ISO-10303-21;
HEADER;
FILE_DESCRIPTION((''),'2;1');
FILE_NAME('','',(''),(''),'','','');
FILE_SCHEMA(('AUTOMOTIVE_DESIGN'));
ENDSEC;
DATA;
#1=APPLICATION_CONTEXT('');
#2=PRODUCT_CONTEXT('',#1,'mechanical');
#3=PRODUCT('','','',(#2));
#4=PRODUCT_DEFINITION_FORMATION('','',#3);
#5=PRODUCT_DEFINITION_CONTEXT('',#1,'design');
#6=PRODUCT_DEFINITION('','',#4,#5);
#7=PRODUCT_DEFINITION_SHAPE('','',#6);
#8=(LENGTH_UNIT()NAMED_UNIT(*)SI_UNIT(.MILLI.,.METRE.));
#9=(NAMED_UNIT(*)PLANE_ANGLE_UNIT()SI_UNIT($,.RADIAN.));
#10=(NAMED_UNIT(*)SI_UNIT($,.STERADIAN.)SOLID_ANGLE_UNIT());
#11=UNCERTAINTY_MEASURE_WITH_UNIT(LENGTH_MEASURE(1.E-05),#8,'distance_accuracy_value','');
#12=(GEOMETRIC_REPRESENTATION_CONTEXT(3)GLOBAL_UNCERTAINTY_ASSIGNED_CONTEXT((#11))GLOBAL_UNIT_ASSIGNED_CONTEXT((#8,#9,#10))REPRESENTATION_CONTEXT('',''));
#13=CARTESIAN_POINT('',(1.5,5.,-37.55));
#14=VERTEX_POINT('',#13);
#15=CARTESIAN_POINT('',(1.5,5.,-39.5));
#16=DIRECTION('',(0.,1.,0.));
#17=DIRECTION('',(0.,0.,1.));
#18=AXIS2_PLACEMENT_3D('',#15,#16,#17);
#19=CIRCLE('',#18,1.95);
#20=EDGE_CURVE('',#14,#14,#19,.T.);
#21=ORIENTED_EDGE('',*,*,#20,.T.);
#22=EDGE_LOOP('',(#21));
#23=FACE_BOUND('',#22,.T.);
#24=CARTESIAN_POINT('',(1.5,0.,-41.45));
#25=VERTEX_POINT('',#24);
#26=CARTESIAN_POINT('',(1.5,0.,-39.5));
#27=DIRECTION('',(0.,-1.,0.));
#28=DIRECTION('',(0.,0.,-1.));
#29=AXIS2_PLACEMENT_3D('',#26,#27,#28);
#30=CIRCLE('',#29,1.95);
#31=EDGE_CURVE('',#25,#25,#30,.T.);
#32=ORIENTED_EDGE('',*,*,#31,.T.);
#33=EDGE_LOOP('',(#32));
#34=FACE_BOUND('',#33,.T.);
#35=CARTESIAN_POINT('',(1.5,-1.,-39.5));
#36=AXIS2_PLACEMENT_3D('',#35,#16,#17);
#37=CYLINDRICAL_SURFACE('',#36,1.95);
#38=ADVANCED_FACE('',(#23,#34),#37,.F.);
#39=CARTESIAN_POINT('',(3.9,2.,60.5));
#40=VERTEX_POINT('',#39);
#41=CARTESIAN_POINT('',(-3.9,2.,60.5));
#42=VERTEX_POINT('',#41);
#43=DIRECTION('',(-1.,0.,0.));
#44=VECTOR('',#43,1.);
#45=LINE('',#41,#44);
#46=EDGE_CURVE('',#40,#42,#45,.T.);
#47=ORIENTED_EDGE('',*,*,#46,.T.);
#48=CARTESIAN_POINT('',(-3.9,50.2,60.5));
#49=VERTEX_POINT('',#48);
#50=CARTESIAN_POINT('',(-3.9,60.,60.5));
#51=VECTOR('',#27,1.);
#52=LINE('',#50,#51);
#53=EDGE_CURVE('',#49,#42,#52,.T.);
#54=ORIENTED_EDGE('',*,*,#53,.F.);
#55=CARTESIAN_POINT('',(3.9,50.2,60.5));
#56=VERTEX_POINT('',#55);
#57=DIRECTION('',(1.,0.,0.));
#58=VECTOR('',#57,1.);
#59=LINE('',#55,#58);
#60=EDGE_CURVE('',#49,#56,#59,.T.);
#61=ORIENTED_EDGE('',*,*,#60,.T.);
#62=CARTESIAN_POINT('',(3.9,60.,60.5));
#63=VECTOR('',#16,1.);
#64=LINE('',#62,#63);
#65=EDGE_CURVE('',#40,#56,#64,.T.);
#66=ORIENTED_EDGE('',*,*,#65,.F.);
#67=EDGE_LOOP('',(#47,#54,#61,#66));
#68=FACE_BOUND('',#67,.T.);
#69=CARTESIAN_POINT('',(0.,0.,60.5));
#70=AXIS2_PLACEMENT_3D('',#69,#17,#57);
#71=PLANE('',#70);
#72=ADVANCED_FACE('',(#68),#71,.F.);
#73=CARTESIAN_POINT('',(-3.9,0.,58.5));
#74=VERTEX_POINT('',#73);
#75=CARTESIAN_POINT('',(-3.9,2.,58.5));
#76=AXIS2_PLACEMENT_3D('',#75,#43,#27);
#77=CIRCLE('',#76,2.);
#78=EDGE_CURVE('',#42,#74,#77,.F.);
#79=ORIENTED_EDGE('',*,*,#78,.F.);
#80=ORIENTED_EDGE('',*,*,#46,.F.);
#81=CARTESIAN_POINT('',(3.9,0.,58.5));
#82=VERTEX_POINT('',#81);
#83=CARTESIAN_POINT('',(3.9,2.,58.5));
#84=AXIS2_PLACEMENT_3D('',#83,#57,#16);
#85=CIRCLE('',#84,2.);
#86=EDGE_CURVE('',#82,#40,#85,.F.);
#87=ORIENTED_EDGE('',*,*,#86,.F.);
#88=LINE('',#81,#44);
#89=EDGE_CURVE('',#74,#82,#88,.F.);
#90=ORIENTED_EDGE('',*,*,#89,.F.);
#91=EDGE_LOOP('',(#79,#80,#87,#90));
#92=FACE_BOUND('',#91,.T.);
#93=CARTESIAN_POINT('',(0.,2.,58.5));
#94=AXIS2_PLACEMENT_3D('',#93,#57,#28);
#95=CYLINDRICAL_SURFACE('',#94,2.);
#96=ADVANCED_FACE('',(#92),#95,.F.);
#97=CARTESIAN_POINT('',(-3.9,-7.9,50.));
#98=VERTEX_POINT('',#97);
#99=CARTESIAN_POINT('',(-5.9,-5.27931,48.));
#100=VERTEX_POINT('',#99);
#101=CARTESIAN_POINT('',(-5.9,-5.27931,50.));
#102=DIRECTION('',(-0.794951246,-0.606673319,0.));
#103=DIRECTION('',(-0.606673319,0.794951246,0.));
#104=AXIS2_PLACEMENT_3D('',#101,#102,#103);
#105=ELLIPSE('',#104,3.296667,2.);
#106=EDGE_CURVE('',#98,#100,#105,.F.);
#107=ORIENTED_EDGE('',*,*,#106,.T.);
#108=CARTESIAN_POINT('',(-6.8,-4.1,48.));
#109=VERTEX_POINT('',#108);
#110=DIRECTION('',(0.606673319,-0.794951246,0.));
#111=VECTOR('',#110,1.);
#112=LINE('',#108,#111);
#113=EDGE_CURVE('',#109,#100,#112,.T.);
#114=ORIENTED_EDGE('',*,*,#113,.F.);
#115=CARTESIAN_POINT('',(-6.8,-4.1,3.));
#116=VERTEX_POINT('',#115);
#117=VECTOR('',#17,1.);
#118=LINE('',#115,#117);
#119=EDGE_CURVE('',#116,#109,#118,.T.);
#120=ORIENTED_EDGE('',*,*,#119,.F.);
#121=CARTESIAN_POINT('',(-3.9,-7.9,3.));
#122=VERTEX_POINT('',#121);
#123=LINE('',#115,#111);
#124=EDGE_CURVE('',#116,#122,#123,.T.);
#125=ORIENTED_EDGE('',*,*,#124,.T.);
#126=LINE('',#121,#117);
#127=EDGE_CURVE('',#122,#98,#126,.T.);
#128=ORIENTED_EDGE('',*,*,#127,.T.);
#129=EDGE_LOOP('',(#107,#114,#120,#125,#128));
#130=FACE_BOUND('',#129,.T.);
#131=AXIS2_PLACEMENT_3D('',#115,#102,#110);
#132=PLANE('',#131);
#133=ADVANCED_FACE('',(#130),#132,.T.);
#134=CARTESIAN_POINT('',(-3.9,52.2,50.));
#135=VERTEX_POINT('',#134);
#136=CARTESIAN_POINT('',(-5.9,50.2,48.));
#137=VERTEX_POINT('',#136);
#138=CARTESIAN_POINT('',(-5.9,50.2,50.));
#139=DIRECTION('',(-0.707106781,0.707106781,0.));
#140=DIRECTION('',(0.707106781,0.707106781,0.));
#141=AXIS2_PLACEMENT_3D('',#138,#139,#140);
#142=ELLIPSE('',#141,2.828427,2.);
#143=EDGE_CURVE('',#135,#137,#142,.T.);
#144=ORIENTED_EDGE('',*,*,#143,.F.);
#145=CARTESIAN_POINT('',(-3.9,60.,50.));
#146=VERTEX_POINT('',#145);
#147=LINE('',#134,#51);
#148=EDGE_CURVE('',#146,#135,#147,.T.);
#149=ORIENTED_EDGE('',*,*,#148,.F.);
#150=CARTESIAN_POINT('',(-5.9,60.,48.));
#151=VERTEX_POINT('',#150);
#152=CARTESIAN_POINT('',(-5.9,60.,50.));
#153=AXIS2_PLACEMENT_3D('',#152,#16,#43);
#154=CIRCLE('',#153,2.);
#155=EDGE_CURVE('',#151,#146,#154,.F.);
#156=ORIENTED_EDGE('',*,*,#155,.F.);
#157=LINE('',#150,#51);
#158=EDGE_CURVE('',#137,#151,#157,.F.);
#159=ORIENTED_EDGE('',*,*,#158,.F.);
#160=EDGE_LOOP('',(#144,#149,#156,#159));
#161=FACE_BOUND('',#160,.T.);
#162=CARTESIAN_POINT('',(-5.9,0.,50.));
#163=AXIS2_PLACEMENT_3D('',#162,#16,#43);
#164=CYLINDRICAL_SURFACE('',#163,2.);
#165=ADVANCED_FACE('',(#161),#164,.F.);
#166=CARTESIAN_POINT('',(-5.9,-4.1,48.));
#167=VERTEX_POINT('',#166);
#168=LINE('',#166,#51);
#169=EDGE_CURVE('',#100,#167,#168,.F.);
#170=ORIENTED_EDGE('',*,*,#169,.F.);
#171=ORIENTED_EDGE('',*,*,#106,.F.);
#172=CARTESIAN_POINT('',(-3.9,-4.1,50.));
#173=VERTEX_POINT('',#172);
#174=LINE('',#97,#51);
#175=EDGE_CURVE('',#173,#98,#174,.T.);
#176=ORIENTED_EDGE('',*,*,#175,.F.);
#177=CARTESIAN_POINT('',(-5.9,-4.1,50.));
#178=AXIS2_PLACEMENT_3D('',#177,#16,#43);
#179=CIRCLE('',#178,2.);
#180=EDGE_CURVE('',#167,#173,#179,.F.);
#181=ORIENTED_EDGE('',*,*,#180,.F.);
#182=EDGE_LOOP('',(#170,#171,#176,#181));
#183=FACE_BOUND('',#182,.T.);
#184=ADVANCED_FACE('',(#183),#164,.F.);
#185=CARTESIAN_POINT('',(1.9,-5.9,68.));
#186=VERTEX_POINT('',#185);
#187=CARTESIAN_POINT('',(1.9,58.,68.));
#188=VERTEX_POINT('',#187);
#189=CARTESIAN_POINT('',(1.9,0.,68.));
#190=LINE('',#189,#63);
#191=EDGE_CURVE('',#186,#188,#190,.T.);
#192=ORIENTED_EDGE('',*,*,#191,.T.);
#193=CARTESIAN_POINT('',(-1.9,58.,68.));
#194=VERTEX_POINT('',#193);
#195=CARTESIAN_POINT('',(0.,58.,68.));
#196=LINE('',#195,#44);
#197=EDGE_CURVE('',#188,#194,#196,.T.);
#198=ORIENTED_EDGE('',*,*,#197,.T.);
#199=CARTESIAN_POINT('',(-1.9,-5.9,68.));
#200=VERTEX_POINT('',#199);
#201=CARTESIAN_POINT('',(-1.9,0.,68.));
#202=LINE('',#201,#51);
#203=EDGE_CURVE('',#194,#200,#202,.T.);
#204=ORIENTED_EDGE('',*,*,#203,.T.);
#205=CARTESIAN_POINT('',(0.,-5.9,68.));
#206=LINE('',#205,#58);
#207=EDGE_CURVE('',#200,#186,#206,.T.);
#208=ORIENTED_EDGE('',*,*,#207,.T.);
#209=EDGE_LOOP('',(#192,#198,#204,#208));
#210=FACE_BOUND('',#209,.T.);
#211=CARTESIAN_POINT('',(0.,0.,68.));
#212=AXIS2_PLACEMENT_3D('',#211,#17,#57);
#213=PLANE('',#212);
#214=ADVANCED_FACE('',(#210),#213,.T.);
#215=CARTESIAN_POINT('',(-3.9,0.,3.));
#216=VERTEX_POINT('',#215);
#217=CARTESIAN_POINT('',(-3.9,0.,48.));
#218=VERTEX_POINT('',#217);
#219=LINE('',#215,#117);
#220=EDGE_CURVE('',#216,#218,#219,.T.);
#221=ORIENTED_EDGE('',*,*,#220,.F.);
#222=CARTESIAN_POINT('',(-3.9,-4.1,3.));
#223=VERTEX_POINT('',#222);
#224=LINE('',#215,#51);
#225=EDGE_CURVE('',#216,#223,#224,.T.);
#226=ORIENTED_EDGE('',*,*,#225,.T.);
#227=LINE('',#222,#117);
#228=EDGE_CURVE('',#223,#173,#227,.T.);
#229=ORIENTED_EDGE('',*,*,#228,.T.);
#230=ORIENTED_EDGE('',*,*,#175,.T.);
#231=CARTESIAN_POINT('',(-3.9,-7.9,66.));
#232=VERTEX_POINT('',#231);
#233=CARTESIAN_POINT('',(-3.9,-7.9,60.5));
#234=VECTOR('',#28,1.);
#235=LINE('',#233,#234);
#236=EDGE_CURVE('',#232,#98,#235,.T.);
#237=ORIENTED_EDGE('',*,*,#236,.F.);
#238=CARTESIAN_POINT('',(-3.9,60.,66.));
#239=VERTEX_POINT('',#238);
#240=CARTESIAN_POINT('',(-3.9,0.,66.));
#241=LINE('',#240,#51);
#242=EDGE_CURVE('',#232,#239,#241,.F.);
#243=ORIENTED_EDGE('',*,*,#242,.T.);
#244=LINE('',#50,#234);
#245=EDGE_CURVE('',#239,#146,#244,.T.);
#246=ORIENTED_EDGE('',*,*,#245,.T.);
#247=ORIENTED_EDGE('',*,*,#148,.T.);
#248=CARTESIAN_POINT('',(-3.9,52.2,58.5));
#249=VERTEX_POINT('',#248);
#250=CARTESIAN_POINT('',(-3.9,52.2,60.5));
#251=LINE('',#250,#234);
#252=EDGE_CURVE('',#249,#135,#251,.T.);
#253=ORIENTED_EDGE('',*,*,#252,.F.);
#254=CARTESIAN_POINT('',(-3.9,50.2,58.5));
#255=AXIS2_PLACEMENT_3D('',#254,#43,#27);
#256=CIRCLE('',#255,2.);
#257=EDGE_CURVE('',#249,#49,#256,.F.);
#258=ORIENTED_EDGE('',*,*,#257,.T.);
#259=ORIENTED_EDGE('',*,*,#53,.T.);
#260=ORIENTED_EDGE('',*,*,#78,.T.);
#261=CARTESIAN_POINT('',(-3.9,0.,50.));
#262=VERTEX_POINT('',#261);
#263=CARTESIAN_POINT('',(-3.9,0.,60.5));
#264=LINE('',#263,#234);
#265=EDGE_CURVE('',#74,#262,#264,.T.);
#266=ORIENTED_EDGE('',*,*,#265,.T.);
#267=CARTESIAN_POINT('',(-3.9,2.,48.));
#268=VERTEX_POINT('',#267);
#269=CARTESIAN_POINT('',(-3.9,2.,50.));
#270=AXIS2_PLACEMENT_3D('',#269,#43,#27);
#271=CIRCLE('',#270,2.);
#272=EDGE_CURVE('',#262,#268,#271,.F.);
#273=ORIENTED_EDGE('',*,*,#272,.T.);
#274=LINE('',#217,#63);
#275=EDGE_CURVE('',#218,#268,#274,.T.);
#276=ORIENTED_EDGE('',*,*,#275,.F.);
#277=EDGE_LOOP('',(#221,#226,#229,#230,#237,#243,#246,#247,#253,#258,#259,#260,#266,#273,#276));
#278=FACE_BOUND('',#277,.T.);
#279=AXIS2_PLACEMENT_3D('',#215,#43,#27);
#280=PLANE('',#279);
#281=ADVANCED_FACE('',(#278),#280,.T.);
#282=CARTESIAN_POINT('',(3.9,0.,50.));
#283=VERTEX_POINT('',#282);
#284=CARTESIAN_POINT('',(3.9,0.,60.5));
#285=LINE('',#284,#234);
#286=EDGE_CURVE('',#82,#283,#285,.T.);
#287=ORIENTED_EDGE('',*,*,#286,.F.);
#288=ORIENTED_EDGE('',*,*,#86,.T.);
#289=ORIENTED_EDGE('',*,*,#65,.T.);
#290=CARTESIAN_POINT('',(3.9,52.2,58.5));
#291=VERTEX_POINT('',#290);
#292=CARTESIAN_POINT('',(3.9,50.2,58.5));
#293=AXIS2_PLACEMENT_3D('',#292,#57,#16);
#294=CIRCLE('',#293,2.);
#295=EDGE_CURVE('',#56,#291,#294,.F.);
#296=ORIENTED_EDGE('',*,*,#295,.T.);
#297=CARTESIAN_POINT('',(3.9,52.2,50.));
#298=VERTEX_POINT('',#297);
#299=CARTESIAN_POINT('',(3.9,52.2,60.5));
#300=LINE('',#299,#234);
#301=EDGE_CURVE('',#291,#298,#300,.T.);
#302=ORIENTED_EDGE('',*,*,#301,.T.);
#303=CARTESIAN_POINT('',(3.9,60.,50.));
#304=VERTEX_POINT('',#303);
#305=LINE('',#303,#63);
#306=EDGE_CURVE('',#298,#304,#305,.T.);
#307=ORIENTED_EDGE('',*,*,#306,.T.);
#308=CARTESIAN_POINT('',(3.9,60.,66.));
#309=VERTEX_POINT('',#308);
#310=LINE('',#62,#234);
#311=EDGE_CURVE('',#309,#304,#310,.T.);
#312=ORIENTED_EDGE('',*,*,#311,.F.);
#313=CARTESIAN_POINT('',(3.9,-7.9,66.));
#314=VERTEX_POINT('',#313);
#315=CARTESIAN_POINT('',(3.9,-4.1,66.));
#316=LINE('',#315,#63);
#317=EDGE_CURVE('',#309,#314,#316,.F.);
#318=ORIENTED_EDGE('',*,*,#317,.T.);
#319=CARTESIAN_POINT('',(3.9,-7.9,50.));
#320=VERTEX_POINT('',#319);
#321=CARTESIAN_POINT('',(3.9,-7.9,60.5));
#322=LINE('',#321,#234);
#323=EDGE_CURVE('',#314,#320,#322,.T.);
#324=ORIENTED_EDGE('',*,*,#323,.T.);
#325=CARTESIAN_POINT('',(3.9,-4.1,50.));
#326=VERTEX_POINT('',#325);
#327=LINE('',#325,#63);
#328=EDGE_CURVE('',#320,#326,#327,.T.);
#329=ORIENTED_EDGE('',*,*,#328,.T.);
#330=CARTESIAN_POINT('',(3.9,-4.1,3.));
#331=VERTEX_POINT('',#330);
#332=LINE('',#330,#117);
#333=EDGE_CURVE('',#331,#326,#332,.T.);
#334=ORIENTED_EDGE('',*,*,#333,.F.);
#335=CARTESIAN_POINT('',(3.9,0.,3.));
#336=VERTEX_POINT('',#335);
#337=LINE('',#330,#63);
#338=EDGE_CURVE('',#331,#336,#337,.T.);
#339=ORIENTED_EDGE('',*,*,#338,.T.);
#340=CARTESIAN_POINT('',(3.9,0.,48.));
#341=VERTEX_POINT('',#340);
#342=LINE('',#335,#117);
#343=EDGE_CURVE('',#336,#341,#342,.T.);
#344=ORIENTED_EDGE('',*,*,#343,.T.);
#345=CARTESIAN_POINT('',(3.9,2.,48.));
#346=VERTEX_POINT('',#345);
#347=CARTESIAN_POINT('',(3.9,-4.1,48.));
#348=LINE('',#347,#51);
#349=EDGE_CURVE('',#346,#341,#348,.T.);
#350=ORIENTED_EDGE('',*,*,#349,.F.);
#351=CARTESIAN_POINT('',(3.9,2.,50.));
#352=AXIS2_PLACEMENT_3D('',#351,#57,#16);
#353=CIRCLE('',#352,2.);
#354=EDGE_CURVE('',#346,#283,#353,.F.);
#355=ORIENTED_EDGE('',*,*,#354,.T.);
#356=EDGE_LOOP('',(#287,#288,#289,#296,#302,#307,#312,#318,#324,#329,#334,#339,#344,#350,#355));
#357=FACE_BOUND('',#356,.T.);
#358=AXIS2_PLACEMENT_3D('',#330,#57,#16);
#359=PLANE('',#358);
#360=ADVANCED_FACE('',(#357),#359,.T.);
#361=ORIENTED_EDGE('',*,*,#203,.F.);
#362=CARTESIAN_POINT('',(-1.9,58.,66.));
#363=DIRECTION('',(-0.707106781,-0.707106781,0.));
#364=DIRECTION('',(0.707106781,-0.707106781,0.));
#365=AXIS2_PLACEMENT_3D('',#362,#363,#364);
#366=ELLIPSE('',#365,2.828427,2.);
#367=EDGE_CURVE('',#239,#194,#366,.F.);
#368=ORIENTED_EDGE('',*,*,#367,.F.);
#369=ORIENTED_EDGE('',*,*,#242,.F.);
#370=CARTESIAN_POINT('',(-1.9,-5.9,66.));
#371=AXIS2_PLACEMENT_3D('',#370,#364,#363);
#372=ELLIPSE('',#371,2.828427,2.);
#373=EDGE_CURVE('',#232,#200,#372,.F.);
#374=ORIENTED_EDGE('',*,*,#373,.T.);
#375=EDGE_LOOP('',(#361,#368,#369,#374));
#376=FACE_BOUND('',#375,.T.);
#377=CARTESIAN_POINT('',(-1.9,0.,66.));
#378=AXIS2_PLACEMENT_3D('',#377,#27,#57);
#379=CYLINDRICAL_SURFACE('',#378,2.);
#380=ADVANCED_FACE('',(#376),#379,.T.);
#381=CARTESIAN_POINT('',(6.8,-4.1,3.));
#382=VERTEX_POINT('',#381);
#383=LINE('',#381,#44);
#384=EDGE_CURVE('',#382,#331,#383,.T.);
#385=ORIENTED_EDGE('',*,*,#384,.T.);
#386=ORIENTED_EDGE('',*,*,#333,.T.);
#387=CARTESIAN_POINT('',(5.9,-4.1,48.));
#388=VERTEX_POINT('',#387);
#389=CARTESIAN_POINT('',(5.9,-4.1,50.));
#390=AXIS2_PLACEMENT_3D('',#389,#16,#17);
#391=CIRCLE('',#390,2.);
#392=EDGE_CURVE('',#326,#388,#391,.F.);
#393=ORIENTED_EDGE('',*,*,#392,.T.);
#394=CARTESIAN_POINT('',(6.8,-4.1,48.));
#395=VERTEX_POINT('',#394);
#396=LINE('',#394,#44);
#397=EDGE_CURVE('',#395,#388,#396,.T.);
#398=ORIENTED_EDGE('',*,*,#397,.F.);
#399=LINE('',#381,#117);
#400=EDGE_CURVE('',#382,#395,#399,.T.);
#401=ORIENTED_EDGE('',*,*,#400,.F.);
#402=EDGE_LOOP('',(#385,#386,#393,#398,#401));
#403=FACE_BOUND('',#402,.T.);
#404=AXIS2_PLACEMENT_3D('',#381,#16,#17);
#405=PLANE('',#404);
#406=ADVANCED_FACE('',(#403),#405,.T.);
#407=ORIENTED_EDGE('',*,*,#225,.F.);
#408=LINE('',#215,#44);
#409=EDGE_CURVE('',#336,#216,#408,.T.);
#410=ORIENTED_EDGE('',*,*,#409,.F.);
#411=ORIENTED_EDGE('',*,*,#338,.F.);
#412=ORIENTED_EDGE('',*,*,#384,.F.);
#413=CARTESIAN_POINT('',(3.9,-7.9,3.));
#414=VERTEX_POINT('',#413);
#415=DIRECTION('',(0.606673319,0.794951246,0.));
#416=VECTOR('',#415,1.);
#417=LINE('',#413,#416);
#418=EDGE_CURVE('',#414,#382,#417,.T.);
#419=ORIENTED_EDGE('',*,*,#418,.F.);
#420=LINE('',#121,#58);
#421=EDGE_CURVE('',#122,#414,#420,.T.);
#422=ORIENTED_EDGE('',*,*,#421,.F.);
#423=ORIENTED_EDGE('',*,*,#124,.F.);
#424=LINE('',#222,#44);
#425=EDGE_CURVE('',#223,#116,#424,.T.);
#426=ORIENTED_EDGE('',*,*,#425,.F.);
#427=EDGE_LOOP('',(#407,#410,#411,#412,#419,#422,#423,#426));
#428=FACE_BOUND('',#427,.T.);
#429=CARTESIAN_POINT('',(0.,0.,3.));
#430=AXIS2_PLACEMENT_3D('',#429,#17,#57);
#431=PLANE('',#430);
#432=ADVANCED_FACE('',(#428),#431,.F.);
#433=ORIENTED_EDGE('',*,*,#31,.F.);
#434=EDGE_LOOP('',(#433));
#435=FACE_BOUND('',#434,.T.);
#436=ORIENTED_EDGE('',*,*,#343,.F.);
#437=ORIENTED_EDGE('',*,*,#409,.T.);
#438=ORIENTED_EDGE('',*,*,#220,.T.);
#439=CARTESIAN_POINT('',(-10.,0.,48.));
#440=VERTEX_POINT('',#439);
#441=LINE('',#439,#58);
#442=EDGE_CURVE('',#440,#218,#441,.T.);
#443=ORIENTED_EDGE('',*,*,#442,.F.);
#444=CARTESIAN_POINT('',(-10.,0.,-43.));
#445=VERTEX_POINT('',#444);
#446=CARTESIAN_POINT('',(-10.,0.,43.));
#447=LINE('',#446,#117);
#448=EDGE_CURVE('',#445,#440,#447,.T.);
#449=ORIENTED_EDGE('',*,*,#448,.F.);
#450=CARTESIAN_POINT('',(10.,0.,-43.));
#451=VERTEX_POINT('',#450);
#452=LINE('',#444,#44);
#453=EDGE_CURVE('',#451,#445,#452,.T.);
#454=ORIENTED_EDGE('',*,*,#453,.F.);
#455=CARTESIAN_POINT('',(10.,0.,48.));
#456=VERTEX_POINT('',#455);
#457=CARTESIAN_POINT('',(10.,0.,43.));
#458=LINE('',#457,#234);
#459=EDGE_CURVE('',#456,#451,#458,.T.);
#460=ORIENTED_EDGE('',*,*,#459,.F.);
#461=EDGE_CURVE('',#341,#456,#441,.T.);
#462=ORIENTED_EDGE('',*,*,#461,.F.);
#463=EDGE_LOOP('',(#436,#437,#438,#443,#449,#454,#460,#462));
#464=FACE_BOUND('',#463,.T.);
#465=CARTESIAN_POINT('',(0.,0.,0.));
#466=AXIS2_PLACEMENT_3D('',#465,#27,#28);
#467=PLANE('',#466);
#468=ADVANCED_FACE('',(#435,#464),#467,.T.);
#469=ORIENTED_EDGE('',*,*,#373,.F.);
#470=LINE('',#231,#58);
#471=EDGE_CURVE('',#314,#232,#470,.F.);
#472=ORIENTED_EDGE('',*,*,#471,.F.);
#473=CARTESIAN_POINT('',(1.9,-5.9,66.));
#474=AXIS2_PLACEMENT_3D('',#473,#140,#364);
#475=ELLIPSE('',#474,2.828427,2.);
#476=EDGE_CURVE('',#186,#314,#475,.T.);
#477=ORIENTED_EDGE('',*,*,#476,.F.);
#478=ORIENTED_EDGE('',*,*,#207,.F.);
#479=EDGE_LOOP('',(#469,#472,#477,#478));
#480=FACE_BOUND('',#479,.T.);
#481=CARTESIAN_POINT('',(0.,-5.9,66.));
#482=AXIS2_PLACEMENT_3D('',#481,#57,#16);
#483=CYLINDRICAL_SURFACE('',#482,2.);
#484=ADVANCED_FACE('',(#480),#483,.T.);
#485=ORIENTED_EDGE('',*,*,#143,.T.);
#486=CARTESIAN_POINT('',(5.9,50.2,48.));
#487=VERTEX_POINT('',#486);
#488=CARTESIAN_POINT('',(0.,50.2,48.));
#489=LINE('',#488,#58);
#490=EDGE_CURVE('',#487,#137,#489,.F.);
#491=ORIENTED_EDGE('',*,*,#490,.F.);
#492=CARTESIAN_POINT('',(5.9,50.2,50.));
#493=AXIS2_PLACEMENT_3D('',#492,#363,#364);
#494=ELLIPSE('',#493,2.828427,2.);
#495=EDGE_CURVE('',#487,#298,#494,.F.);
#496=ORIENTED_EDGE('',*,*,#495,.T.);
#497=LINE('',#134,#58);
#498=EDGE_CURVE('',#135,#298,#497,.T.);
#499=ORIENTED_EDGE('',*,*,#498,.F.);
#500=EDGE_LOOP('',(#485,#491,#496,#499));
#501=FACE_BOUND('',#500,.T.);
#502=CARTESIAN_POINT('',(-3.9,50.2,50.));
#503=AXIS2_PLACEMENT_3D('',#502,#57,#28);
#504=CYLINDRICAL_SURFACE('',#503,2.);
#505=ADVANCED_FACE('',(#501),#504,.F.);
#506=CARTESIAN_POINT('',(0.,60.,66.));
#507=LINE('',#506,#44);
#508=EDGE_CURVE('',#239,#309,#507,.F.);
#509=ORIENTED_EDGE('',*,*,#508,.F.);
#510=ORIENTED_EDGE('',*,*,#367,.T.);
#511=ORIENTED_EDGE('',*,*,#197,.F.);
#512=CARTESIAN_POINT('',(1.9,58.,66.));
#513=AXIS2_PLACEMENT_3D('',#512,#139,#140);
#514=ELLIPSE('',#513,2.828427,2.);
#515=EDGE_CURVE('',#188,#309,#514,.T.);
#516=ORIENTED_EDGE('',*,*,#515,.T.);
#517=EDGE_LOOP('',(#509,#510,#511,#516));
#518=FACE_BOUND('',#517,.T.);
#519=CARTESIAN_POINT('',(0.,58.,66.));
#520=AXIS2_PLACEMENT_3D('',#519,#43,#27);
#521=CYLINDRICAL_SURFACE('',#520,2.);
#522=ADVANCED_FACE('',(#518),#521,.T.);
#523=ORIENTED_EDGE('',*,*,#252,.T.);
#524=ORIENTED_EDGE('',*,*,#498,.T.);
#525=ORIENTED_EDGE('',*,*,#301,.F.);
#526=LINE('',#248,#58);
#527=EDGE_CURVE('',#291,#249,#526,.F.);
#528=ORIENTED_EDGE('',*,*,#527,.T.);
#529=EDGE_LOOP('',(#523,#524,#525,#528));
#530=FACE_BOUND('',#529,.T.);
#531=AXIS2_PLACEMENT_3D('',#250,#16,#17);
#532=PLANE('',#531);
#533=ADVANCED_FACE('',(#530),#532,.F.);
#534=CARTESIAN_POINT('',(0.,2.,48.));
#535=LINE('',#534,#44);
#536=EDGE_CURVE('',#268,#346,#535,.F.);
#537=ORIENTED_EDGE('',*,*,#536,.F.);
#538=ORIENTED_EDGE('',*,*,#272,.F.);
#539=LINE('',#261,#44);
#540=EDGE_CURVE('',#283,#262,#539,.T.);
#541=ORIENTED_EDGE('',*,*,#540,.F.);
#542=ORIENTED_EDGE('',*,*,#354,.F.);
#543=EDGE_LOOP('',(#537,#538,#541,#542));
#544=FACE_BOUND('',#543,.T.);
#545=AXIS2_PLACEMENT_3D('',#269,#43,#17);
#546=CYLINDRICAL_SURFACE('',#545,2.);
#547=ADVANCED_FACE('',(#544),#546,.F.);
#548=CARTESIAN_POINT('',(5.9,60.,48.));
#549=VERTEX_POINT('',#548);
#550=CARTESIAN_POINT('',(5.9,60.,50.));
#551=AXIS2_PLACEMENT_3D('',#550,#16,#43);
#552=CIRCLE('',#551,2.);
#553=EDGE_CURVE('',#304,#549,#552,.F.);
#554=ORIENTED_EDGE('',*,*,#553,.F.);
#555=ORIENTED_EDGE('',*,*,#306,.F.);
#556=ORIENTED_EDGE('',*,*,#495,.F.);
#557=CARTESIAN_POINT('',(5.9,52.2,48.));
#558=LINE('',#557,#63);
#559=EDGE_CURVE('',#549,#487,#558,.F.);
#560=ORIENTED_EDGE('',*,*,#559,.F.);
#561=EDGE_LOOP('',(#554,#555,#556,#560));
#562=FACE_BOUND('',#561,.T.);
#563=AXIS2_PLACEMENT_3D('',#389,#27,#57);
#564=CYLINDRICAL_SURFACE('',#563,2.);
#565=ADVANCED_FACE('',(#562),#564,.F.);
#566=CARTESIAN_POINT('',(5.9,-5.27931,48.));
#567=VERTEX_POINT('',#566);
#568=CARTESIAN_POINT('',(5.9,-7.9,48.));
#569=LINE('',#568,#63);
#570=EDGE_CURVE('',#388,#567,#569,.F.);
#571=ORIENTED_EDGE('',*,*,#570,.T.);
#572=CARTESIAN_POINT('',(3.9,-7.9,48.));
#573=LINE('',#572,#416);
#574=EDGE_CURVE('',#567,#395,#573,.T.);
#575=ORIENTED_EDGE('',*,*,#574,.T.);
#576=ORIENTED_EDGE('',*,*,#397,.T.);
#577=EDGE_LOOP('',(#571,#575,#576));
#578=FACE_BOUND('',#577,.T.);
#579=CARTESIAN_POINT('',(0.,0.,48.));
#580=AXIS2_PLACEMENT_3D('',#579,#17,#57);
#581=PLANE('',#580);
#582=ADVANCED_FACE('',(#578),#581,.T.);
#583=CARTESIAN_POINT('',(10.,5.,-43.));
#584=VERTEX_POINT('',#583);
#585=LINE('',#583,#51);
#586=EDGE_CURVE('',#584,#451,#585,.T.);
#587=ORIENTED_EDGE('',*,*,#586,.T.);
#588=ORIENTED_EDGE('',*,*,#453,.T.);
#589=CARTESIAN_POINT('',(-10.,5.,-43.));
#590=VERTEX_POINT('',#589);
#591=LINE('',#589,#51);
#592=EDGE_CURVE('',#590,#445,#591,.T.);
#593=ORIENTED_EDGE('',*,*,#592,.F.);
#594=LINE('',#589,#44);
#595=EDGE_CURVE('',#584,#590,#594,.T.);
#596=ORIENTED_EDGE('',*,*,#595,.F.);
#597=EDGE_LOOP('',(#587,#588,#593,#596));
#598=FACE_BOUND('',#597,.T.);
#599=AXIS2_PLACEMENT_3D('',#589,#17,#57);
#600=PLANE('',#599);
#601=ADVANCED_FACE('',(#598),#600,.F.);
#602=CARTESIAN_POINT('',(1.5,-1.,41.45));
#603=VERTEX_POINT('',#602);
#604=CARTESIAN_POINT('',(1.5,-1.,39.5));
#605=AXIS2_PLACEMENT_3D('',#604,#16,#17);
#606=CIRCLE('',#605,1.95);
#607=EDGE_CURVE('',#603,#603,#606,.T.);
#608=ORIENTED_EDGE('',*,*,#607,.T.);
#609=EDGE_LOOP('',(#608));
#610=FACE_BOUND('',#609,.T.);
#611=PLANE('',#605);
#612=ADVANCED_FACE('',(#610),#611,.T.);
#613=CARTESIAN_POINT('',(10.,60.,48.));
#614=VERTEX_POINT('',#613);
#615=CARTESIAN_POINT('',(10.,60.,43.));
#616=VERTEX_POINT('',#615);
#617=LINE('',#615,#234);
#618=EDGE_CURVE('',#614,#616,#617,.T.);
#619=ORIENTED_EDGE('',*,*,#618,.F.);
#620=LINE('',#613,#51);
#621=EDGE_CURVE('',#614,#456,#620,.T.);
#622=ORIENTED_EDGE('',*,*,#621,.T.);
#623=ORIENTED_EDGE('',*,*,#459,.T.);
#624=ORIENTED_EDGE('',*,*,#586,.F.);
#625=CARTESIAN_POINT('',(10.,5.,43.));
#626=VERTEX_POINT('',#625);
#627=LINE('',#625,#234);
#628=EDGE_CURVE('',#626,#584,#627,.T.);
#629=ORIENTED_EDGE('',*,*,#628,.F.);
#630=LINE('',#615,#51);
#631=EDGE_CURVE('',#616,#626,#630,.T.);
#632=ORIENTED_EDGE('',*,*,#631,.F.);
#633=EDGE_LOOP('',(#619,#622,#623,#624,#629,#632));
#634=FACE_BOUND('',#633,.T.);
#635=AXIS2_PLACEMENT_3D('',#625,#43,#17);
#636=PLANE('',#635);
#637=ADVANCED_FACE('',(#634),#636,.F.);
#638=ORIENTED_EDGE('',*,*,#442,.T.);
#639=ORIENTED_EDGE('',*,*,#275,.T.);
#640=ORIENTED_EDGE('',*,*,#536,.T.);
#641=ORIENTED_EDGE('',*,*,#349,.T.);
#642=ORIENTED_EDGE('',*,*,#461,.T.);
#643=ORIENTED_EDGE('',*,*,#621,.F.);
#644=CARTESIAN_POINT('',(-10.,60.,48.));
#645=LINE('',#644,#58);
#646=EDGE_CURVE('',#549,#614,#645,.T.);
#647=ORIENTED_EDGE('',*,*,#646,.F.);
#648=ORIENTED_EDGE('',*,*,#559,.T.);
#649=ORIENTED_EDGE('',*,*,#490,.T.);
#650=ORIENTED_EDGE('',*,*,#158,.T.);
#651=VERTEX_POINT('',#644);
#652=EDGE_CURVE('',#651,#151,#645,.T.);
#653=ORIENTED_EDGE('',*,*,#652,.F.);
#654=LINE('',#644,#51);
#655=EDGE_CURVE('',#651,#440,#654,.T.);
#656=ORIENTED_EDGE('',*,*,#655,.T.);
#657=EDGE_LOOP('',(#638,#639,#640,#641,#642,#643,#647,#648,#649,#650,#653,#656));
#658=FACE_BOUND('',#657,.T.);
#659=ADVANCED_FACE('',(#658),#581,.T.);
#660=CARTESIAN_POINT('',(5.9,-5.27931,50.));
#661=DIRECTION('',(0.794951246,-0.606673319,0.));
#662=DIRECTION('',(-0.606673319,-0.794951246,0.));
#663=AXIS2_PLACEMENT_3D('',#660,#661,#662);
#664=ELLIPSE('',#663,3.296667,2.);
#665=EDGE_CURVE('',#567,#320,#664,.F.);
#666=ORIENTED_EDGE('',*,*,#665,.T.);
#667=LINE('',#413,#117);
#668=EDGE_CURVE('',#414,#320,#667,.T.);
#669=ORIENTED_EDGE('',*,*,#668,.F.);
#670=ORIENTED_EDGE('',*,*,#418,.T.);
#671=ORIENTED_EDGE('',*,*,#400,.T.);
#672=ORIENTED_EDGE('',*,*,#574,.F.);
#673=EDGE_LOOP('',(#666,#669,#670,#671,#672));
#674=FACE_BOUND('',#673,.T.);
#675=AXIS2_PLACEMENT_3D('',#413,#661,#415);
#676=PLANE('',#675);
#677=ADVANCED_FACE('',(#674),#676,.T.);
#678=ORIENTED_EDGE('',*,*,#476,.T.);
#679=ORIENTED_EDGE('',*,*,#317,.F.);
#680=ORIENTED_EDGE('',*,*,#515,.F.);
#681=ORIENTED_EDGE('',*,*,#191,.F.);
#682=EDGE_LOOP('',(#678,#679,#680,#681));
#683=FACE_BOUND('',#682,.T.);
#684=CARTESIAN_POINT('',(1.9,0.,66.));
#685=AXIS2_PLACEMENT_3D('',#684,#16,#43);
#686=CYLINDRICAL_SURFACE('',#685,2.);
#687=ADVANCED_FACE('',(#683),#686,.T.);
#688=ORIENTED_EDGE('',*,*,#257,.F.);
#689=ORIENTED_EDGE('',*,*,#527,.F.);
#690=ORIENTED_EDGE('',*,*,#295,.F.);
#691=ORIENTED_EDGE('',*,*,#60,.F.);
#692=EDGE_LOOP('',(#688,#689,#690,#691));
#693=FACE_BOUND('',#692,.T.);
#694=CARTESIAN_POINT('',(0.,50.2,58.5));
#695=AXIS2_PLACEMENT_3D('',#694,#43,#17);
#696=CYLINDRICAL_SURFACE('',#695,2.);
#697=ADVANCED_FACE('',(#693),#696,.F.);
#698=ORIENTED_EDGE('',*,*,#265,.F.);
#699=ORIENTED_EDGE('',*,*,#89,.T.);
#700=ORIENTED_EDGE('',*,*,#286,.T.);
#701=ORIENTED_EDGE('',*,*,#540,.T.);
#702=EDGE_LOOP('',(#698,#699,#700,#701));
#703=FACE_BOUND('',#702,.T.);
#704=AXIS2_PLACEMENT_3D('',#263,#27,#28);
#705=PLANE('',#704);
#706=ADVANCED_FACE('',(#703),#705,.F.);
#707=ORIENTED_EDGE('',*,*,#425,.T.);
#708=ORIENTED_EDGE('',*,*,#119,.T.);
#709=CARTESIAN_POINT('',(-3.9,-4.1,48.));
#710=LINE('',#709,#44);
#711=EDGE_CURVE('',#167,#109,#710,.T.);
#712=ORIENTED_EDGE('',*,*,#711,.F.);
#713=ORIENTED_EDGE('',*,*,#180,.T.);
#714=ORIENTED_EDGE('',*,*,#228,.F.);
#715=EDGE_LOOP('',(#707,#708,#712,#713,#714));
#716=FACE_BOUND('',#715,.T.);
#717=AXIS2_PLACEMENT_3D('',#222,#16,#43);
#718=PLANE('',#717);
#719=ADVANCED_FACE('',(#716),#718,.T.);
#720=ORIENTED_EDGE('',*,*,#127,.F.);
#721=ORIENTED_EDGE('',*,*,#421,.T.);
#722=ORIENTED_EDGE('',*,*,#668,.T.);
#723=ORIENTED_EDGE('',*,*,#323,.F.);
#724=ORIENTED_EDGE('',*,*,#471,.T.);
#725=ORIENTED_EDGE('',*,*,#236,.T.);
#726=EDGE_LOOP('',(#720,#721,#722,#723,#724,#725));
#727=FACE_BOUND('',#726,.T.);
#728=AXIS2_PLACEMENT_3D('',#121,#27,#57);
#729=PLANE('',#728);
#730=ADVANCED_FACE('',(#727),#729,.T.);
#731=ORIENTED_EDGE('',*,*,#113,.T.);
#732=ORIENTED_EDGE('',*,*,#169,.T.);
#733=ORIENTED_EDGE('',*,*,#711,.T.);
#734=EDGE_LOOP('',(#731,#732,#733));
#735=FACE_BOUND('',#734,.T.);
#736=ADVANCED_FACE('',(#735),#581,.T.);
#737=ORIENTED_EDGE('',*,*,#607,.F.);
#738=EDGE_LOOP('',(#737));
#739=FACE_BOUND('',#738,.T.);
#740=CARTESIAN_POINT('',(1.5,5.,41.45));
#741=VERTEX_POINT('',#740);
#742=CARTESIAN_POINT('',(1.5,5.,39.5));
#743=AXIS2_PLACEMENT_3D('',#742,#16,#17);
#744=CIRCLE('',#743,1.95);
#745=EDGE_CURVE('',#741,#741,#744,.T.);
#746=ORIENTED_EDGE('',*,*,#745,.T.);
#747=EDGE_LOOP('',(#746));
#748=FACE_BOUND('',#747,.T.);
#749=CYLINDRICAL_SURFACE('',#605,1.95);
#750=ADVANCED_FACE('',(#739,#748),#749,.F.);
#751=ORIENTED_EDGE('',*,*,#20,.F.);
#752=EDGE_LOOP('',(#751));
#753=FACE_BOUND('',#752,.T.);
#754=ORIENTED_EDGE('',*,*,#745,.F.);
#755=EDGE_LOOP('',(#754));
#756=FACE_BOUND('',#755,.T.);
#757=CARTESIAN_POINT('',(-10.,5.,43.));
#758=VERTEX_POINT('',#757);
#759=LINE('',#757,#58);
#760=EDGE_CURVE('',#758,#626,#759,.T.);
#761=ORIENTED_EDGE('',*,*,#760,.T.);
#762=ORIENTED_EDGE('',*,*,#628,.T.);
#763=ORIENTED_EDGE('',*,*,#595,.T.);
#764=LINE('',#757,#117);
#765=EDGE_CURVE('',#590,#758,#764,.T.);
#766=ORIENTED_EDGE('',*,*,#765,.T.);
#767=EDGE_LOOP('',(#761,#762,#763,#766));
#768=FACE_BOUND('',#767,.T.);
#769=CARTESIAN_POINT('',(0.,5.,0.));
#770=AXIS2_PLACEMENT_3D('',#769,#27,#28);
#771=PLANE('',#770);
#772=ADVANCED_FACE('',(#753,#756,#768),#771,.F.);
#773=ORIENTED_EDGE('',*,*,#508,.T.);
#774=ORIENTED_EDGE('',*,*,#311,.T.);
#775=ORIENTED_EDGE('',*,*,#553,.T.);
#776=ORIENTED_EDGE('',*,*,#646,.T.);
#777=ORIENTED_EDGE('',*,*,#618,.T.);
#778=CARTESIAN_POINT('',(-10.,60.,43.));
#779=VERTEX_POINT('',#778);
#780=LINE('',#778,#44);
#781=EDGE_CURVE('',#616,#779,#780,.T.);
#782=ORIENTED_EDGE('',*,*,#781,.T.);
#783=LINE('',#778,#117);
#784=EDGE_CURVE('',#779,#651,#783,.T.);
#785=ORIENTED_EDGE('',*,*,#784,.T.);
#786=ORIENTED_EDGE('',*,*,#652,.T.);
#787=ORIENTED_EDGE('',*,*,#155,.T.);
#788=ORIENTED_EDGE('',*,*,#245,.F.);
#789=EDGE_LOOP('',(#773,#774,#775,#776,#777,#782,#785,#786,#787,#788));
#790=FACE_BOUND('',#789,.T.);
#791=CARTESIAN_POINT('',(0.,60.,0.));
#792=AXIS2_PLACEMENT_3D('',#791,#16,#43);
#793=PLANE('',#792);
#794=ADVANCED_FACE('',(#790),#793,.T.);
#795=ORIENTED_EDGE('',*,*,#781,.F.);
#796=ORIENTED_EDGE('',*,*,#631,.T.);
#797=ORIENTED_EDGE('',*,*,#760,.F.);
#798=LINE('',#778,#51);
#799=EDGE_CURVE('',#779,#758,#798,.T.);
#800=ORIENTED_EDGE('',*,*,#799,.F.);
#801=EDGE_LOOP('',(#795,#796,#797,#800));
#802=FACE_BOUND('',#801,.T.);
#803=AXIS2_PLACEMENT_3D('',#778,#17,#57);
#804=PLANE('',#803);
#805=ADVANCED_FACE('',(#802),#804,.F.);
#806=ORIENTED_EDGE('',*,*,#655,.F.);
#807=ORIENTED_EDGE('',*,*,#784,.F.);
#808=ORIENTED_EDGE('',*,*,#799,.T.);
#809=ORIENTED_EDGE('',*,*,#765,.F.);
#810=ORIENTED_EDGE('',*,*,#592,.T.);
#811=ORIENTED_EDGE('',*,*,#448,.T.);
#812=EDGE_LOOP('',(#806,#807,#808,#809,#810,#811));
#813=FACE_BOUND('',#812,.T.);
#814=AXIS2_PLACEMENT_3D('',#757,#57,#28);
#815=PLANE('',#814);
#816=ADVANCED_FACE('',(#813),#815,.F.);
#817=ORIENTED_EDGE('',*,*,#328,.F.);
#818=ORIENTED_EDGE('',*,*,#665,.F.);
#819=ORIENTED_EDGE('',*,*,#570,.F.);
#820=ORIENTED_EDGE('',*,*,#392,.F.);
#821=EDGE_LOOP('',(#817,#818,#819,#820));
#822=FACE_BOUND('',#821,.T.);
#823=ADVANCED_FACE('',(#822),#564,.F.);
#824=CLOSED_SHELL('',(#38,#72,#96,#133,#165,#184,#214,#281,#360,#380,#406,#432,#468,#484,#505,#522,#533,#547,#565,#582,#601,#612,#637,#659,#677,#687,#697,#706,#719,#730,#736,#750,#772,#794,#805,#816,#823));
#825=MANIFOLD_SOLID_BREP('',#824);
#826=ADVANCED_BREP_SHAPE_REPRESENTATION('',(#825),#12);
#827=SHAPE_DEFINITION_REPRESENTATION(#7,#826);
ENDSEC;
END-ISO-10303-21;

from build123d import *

# Parameters (mm, degrees)
SKETCH1_W           = 20
SKETCH1_H           = 86
BOSS_EXTRUDE1_DEPTH = 5
BOSS_EXTRUDE4_DEPTH = 40
SKETCH2_R           = 1.95
CUT_EXTRUDE1_DEPTH  = 6
BOSS_EXTRUDE5_DEPTH = 5
SKETCH5_W           = 20
SKETCH5_H           = 5
BOSS_EXTRUDE7_DEPTH = 60
SKETCH6_W           = 7.8
SKETCH6_H           = 7.9
SKETCH6_H_2         = 7.8
BOSS_EXTRUDE8_DEPTH = 12.5
SKETCH7_W           = 7.8
SKETCH7_H           = 67.9
BOSS_EXTRUDE9_DEPTH = 7.5
FILLET2_R           = 2


with BuildPart() as part:
    # Sketch1 → Boss-Extrude1 (new body)
    with BuildSketch(Plane(origin=(0, 0, 0), x_dir=(1, 0, 0), z_dir=(0, 1, 0))):
        Rectangle(SKETCH1_W, SKETCH1_H)
    extrude(amount=BOSS_EXTRUDE1_DEPTH)

    # Sketch4 → Boss-Extrude4 (add)
    with BuildSketch(Plane.XY.offset(43)):
        Polygon((-3.9, 0), (-3.9, -4.1), (-6.8, -4.1), (-3.9, -7.9), (3.9, -7.9), (6.8, -4.1), (3.9, -4.1), (3.9, 0), align=None)
    extrude(amount=-BOSS_EXTRUDE4_DEPTH)

    # Sketch2 → Cut-Extrude1 (cut)
    with BuildSketch(Plane(origin=(0, 5, 0), x_dir=(1, 0, 0), z_dir=(0, 1, 0))):
        with Locations(Location((1.5, -39.5, 0), (0, 0, 270))):
            Circle(SKETCH2_R)
        with Locations(Location((1.5, 39.5, 0), (0, 0, 270))):
            Circle(SKETCH2_R)
    extrude(amount=-CUT_EXTRUDE1_DEPTH, mode=Mode.SUBTRACT)

    # Sketch4<2> → Boss-Extrude5 (add)
    with BuildSketch(Plane.XY.offset(43)):
        Polygon((-3.9, 0), (-3.9, -4.1), (-6.8, -4.1), (-3.9, -7.9), (3.9, -7.9), (6.8, -4.1), (3.9, -4.1), (3.9, 0), align=None)
    extrude(amount=BOSS_EXTRUDE5_DEPTH)

    # Sketch5 → Boss-Extrude7 (add)
    with BuildSketch(Plane(origin=(0, 0, 0), x_dir=(1, 0, 0), z_dir=(0, 1, 0))):
        with Locations((0, -45.5)):
            Rectangle(SKETCH5_W, SKETCH5_H)
    extrude(amount=BOSS_EXTRUDE7_DEPTH)

    # Sketch6 → Boss-Extrude8 (add)
    with BuildSketch(Plane.XY.offset(48)):
        with Locations((0, -3.95)):
            Rectangle(SKETCH6_W, SKETCH6_H)
        with Locations((0, 56.1)):
            Rectangle(SKETCH6_W, SKETCH6_H_2)
    extrude(amount=BOSS_EXTRUDE8_DEPTH)

    # Sketch7 → Boss-Extrude9 (add)
    with BuildSketch(Plane.XY.offset(60.5)):
        with Locations((0, 26.05)):
            Rectangle(SKETCH7_W, SKETCH7_H)
    extrude(amount=BOSS_EXTRUDE9_DEPTH)

    # Fillet2
    # the kernel refuses this fillet: 2 mm, written as the material it adds along each edge
    with BuildSketch(Plane(origin=(3.9, -7.9, 48), x_dir=(0, 0, 1), z_dir=(0, 1, 0))) as fillet2_piece_1_section:
        with BuildLine():
            CenterArc((FILLET2_R, FILLET2_R), FILLET2_R, 180, 90)
            Line((0, FILLET2_R), (-FILLET2_R * 0.02, FILLET2_R))
            Line((-FILLET2_R * 0.02, FILLET2_R), (-FILLET2_R * 0.02, -FILLET2_R * 0.02))
            Line((-FILLET2_R * 0.02, -FILLET2_R * 0.02), (FILLET2_R, -FILLET2_R * 0.02))
            Line((FILLET2_R, -FILLET2_R * 0.02), (FILLET2_R, 0))
        make_face()
    fillet2_piece_1 = extrude(amount=3.8, mode=Mode.PRIVATE)
    fillet2_piece_1 = split(fillet2_piece_1, bisect_by=Plane(origin=(5.074861064, -6.360526881, 48.497353066), z_dir=(-0.7949512460450775, 0.6066733193501909, 0)), keep=Keep.TOP, mode=Mode.PRIVATE)
    add(fillet2_piece_1)
    with BuildSketch(Plane(origin=(3.9, 52.2, 48), x_dir=(0, 0, 1), z_dir=(0, 1, 0)), Plane(origin=(-3.9, 52.2, 60.5), x_dir=(0, -1, 0), z_dir=(1, 0, 0)), Plane(origin=(-3.9, 52.2, 48), x_dir=(0, 0, 1), z_dir=(1, 0, 0)), Plane(origin=(-3.9, 60, 48), x_dir=(0, 0, 1), z_dir=(0, -1, 0))) as fillet2_piece_2:
        with BuildLine():
            CenterArc((FILLET2_R, FILLET2_R), FILLET2_R, 180, 90)
            Line((0, FILLET2_R), (-FILLET2_R * 0.02, FILLET2_R))
            Line((-FILLET2_R * 0.02, FILLET2_R), (-FILLET2_R * 0.02, -FILLET2_R * 0.02))
            Line((-FILLET2_R * 0.02, -FILLET2_R * 0.02), (FILLET2_R, -FILLET2_R * 0.02))
            Line((FILLET2_R, -FILLET2_R * 0.02), (FILLET2_R, 0))
        make_face()
    extrude(amount=7.8)
    with BuildSketch(Plane(origin=(-3.9, -4.1, 48), x_dir=(-1, 0, 0), z_dir=(0, -1, 0))) as fillet2_piece_3_section:
        with BuildLine():
            CenterArc((FILLET2_R, -FILLET2_R), FILLET2_R, 90, 90)
            Line((0, -FILLET2_R), (-FILLET2_R * 0.02, -FILLET2_R))
            Line((-FILLET2_R * 0.02, -FILLET2_R), (-FILLET2_R * 0.02, FILLET2_R * 0.02))
            Line((-FILLET2_R * 0.02, FILLET2_R * 0.02), (FILLET2_R, FILLET2_R * 0.02))
            Line((FILLET2_R, FILLET2_R * 0.02), (FILLET2_R, 0))
        make_face()
    fillet2_piece_3 = extrude(amount=3.8, mode=Mode.PRIVATE)
    fillet2_piece_3 = split(fillet2_piece_3, bisect_by=Plane(origin=(-5.074861064, -6.360526881, 48.497353066), z_dir=(0.7949512460450775, 0.6066733193501909, 0)), keep=Keep.TOP, mode=Mode.PRIVATE)
    add(fillet2_piece_3)
    with BuildSketch(Plane(origin=(3.9, 0, 48), x_dir=(0, 0, 1), z_dir=(-1, 0, 0))) as fillet2_piece_4_section:
        with BuildLine():
            CenterArc((FILLET2_R, FILLET2_R), FILLET2_R, 180, 90)
            Line((0, FILLET2_R), (-FILLET2_R * 0.02, FILLET2_R))
            Line((-FILLET2_R * 0.02, FILLET2_R), (-FILLET2_R * 0.02, -FILLET2_R * 0.02))
            Line((-FILLET2_R * 0.02, -FILLET2_R * 0.02), (FILLET2_R, -FILLET2_R * 0.02))
            Line((FILLET2_R, -FILLET2_R * 0.02), (FILLET2_R, 0))
        make_face()
    fillet2_piece_4 = extrude(amount=7.8, mode=Mode.PRIVATE)
    fillet2_piece_4 = split(fillet2_piece_4, bisect_by=Plane(origin=(0, 0, 48.406946259), z_dir=(0, 1, 0)), keep=Keep.TOP, mode=Mode.PRIVATE)
    add(fillet2_piece_4)
    with BuildSketch(Plane(origin=(3.9, 0, 60.5), x_dir=(0, 0, -1), z_dir=(-1, 0, 0))) as fillet2_piece_5:
        with BuildLine():
            CenterArc((FILLET2_R, -FILLET2_R), FILLET2_R, 90, 90)
            Line((0, -FILLET2_R), (-FILLET2_R * 0.02, -FILLET2_R))
            Line((-FILLET2_R * 0.02, -FILLET2_R), (-FILLET2_R * 0.02, FILLET2_R * 0.02))
            Line((-FILLET2_R * 0.02, FILLET2_R * 0.02), (FILLET2_R, FILLET2_R * 0.02))
            Line((FILLET2_R, FILLET2_R * 0.02), (FILLET2_R, 0))
        make_face()
    extrude(amount=7.8)
    with BuildSketch(Plane(origin=(3.9, 47.2, 48), x_dir=(0, 0, 1), z_dir=(0, 1, 0))) as fillet2_piece_6a_section:
        with BuildLine():
            CenterArc((FILLET2_R, FILLET2_R), FILLET2_R, 180, 90)
            Line((0, FILLET2_R), (-FILLET2_R * 0.02, FILLET2_R))
            Line((-FILLET2_R * 0.02, FILLET2_R), (-FILLET2_R * 0.02, -FILLET2_R * 0.02))
            Line((-FILLET2_R * 0.02, -FILLET2_R * 0.02), (FILLET2_R, -FILLET2_R * 0.02))
            Line((FILLET2_R, -FILLET2_R * 0.02), (FILLET2_R, 0))
        make_face()
    fillet2_piece_6a = extrude(amount=12.8, mode=Mode.PRIVATE)
    fillet2_piece_6a = split(fillet2_piece_6a, bisect_by=Plane(origin=(4.352790229, 52.2, 48.452790229), z_dir=(0, -1, 0)), keep=Keep.TOP, mode=Mode.PRIVATE)
    with BuildSketch(Plane(origin=(-3.9, 52.2, 48), x_dir=(0, 0, 1), z_dir=(1, 0, 0))) as fillet2_piece_6b_section:
        with BuildLine():
            CenterArc((FILLET2_R, FILLET2_R), FILLET2_R, 180, 90)
            Line((0, FILLET2_R), (-FILLET2_R * 0.02, FILLET2_R))
            Line((-FILLET2_R * 0.02, FILLET2_R), (-FILLET2_R * 0.02, -FILLET2_R * 0.02))
            Line((-FILLET2_R * 0.02, -FILLET2_R * 0.02), (FILLET2_R, -FILLET2_R * 0.02))
            Line((FILLET2_R, -FILLET2_R * 0.02), (FILLET2_R, 0))
        make_face()
    fillet2_piece_6b = extrude(amount=12.8, mode=Mode.PRIVATE)
    fillet2_piece_6b = split(fillet2_piece_6b, bisect_by=Plane(origin=(3.9, 51.747209771, 48.452790229), z_dir=(1, 0, 0)), keep=Keep.TOP, mode=Mode.PRIVATE)
    fillet2_piece_6 = fillet2_piece_6a & fillet2_piece_6b
    add(fillet2_piece_6)
    with BuildSketch(Plane(origin=(-8.9, 52.2, 48), x_dir=(0, 0, 1), z_dir=(1, 0, 0))) as fillet2_piece_7a_section:
        with BuildLine():
            CenterArc((FILLET2_R, FILLET2_R), FILLET2_R, 180, 90)
            Line((0, FILLET2_R), (-FILLET2_R * 0.02, FILLET2_R))
            Line((-FILLET2_R * 0.02, FILLET2_R), (-FILLET2_R * 0.02, -FILLET2_R * 0.02))
            Line((-FILLET2_R * 0.02, -FILLET2_R * 0.02), (FILLET2_R, -FILLET2_R * 0.02))
            Line((FILLET2_R, -FILLET2_R * 0.02), (FILLET2_R, 0))
        make_face()
    fillet2_piece_7a = extrude(amount=12.8, mode=Mode.PRIVATE)
    fillet2_piece_7a = split(fillet2_piece_7a, bisect_by=Plane(origin=(-3.9, 51.747209771, 48.452790229), z_dir=(-1, 0, 0)), keep=Keep.TOP, mode=Mode.PRIVATE)
    with BuildSketch(Plane(origin=(-3.9, 60, 48), x_dir=(0, 0, 1), z_dir=(0, -1, 0))) as fillet2_piece_7b_section:
        with BuildLine():
            CenterArc((FILLET2_R, FILLET2_R), FILLET2_R, 180, 90)
            Line((0, FILLET2_R), (-FILLET2_R * 0.02, FILLET2_R))
            Line((-FILLET2_R * 0.02, FILLET2_R), (-FILLET2_R * 0.02, -FILLET2_R * 0.02))
            Line((-FILLET2_R * 0.02, -FILLET2_R * 0.02), (FILLET2_R, -FILLET2_R * 0.02))
            Line((FILLET2_R, -FILLET2_R * 0.02), (FILLET2_R, 0))
        make_face()
    fillet2_piece_7b = extrude(amount=12.8, mode=Mode.PRIVATE)
    fillet2_piece_7b = split(fillet2_piece_7b, bisect_by=Plane(origin=(-4.352790229, 52.2, 48.452790229), z_dir=(0, -1, 0)), keep=Keep.TOP, mode=Mode.PRIVATE)
    fillet2_piece_7 = fillet2_piece_7a & fillet2_piece_7b
    add(fillet2_piece_7)
    # the kernel refuses this fillet: 2 mm, written as the material it takes off along each edge
    with BuildSketch(Plane(origin=(3.9, 60, 68), x_dir=(0, 0, -1), z_dir=(0, -1, 0))) as fillet2_2_piece_1:
        with BuildLine():
            CenterArc((FILLET2_R, -FILLET2_R), FILLET2_R, 90, 90)
            Line((0, -FILLET2_R), (-FILLET2_R * 0.02, -FILLET2_R))
            Line((-FILLET2_R * 0.02, -FILLET2_R), (-FILLET2_R * 0.02, FILLET2_R * 0.02))
            Line((-FILLET2_R * 0.02, FILLET2_R * 0.02), (FILLET2_R, FILLET2_R * 0.02))
            Line((FILLET2_R, FILLET2_R * 0.02), (FILLET2_R, 0))
        make_face()
    extrude(amount=67.9, mode=Mode.SUBTRACT)
    with BuildSketch(Plane(origin=(-3.9, 60, 68), x_dir=(0, -1, 0), z_dir=(1, 0, 0)), Plane(origin=(3.9, -7.9, 68), x_dir=(0, 1, 0), z_dir=(-1, 0, 0))) as fillet2_2_piece_2:
        with BuildLine():
            CenterArc((FILLET2_R, FILLET2_R), FILLET2_R, 180, 90)
            Line((0, FILLET2_R), (-FILLET2_R * 0.02, FILLET2_R))
            Line((-FILLET2_R * 0.02, FILLET2_R), (-FILLET2_R * 0.02, -FILLET2_R * 0.02))
            Line((-FILLET2_R * 0.02, -FILLET2_R * 0.02), (FILLET2_R, -FILLET2_R * 0.02))
            Line((FILLET2_R, -FILLET2_R * 0.02), (FILLET2_R, 0))
        make_face()
    extrude(amount=7.8, mode=Mode.SUBTRACT)
    with BuildSketch(Plane(origin=(-3.9, -7.9, 68), x_dir=(1, 0, 0), z_dir=(0, 1, 0))) as fillet2_2_piece_3:
        with BuildLine():
            CenterArc((FILLET2_R, FILLET2_R), FILLET2_R, 180, 90)
            Line((0, FILLET2_R), (-FILLET2_R * 0.02, FILLET2_R))
            Line((-FILLET2_R * 0.02, FILLET2_R), (-FILLET2_R * 0.02, -FILLET2_R * 0.02))
            Line((-FILLET2_R * 0.02, -FILLET2_R * 0.02), (FILLET2_R, -FILLET2_R * 0.02))
            Line((FILLET2_R, -FILLET2_R * 0.02), (FILLET2_R, 0))
        make_face()
    extrude(amount=67.9, mode=Mode.SUBTRACT)
    with BuildSketch(Plane(origin=(3.9, 65, 68), x_dir=(0, 0, -1), z_dir=(0, -1, 0))) as fillet2_2_piece_4a_section:
        with BuildLine():
            CenterArc((FILLET2_R, -FILLET2_R), FILLET2_R, 90, 90)
            Line((0, -FILLET2_R), (-FILLET2_R * 0.02, -FILLET2_R))
            Line((-FILLET2_R * 0.02, -FILLET2_R), (-FILLET2_R * 0.02, FILLET2_R * 0.02))
            Line((-FILLET2_R * 0.02, FILLET2_R * 0.02), (FILLET2_R, FILLET2_R * 0.02))
            Line((FILLET2_R, FILLET2_R * 0.02), (FILLET2_R, 0))
        make_face()
    fillet2_2_piece_4a = extrude(amount=72.9, mode=Mode.PRIVATE)
    fillet2_2_piece_4a = split(fillet2_2_piece_4a, bisect_by=Plane(origin=(3.447209771, 60, 67.547209771), z_dir=(0, 1, 0)), keep=Keep.TOP, mode=Mode.PRIVATE)
    with BuildSketch(Plane(origin=(-3.9, 60, 68), x_dir=(0, -1, 0), z_dir=(1, 0, 0))) as fillet2_2_piece_4b_section:
        with BuildLine():
            CenterArc((FILLET2_R, FILLET2_R), FILLET2_R, 180, 90)
            Line((0, FILLET2_R), (-FILLET2_R * 0.02, FILLET2_R))
            Line((-FILLET2_R * 0.02, FILLET2_R), (-FILLET2_R * 0.02, -FILLET2_R * 0.02))
            Line((-FILLET2_R * 0.02, -FILLET2_R * 0.02), (FILLET2_R, -FILLET2_R * 0.02))
            Line((FILLET2_R, -FILLET2_R * 0.02), (FILLET2_R, 0))
        make_face()
    fillet2_2_piece_4b = extrude(amount=12.8, mode=Mode.PRIVATE)
    fillet2_2_piece_4b = split(fillet2_2_piece_4b, bisect_by=Plane(origin=(3.9, 59.547209771, 67.547209771), z_dir=(1, 0, 0)), keep=Keep.TOP, mode=Mode.PRIVATE)
    fillet2_2_piece_4 = fillet2_2_piece_4a & fillet2_2_piece_4b
    add(fillet2_2_piece_4, mode=Mode.SUBTRACT)
    with BuildSketch(Plane(origin=(3.9, 60, 68), x_dir=(0, 0, -1), z_dir=(0, -1, 0))) as fillet2_2_piece_5a_section:
        with BuildLine():
            CenterArc((FILLET2_R, -FILLET2_R), FILLET2_R, 90, 90)
            Line((0, -FILLET2_R), (-FILLET2_R * 0.02, -FILLET2_R))
            Line((-FILLET2_R * 0.02, -FILLET2_R), (-FILLET2_R * 0.02, FILLET2_R * 0.02))
            Line((-FILLET2_R * 0.02, FILLET2_R * 0.02), (FILLET2_R, FILLET2_R * 0.02))
            Line((FILLET2_R, FILLET2_R * 0.02), (FILLET2_R, 0))
        make_face()
    fillet2_2_piece_5a = extrude(amount=72.9, mode=Mode.PRIVATE)
    fillet2_2_piece_5a = split(fillet2_2_piece_5a, bisect_by=Plane(origin=(3.447209771, -7.9, 67.547209771), z_dir=(0, -1, 0)), keep=Keep.TOP, mode=Mode.PRIVATE)
    with BuildSketch(Plane(origin=(8.9, -7.9, 68), x_dir=(0, 1, 0), z_dir=(-1, 0, 0))) as fillet2_2_piece_5b_section:
        with BuildLine():
            CenterArc((FILLET2_R, FILLET2_R), FILLET2_R, 180, 90)
            Line((0, FILLET2_R), (-FILLET2_R * 0.02, FILLET2_R))
            Line((-FILLET2_R * 0.02, FILLET2_R), (-FILLET2_R * 0.02, -FILLET2_R * 0.02))
            Line((-FILLET2_R * 0.02, -FILLET2_R * 0.02), (FILLET2_R, -FILLET2_R * 0.02))
            Line((FILLET2_R, -FILLET2_R * 0.02), (FILLET2_R, 0))
        make_face()
    fillet2_2_piece_5b = extrude(amount=12.8, mode=Mode.PRIVATE)
    fillet2_2_piece_5b = split(fillet2_2_piece_5b, bisect_by=Plane(origin=(3.9, -7.447209771, 67.547209771), z_dir=(1, 0, 0)), keep=Keep.TOP, mode=Mode.PRIVATE)
    fillet2_2_piece_5 = fillet2_2_piece_5a & fillet2_2_piece_5b
    add(fillet2_2_piece_5, mode=Mode.SUBTRACT)
    with BuildSketch(Plane(origin=(-8.9, 60, 68), x_dir=(0, -1, 0), z_dir=(1, 0, 0))) as fillet2_2_piece_6a_section:
        with BuildLine():
            CenterArc((FILLET2_R, FILLET2_R), FILLET2_R, 180, 90)
            Line((0, FILLET2_R), (-FILLET2_R * 0.02, FILLET2_R))
            Line((-FILLET2_R * 0.02, FILLET2_R), (-FILLET2_R * 0.02, -FILLET2_R * 0.02))
            Line((-FILLET2_R * 0.02, -FILLET2_R * 0.02), (FILLET2_R, -FILLET2_R * 0.02))
            Line((FILLET2_R, -FILLET2_R * 0.02), (FILLET2_R, 0))
        make_face()
    fillet2_2_piece_6a = extrude(amount=12.8, mode=Mode.PRIVATE)
    fillet2_2_piece_6a = split(fillet2_2_piece_6a, bisect_by=Plane(origin=(-3.9, 59.547209771, 67.547209771), z_dir=(-1, 0, 0)), keep=Keep.TOP, mode=Mode.PRIVATE)
    with BuildSketch(Plane(origin=(-3.9, -7.9, 68), x_dir=(1, 0, 0), z_dir=(0, 1, 0))) as fillet2_2_piece_6b_section:
        with BuildLine():
            CenterArc((FILLET2_R, FILLET2_R), FILLET2_R, 180, 90)
            Line((0, FILLET2_R), (-FILLET2_R * 0.02, FILLET2_R))
            Line((-FILLET2_R * 0.02, FILLET2_R), (-FILLET2_R * 0.02, -FILLET2_R * 0.02))
            Line((-FILLET2_R * 0.02, -FILLET2_R * 0.02), (FILLET2_R, -FILLET2_R * 0.02))
            Line((FILLET2_R, -FILLET2_R * 0.02), (FILLET2_R, 0))
        make_face()
    fillet2_2_piece_6b = extrude(amount=72.9, mode=Mode.PRIVATE)
    fillet2_2_piece_6b = split(fillet2_2_piece_6b, bisect_by=Plane(origin=(-3.447209771, 60, 67.547209771), z_dir=(0, 1, 0)), keep=Keep.TOP, mode=Mode.PRIVATE)
    fillet2_2_piece_6 = fillet2_2_piece_6a & fillet2_2_piece_6b
    add(fillet2_2_piece_6, mode=Mode.SUBTRACT)
    with BuildSketch(Plane(origin=(3.9, -7.9, 68), x_dir=(0, 1, 0), z_dir=(-1, 0, 0))) as fillet2_2_piece_7a_section:
        with BuildLine():
            CenterArc((FILLET2_R, FILLET2_R), FILLET2_R, 180, 90)
            Line((0, FILLET2_R), (-FILLET2_R * 0.02, FILLET2_R))
            Line((-FILLET2_R * 0.02, FILLET2_R), (-FILLET2_R * 0.02, -FILLET2_R * 0.02))
            Line((-FILLET2_R * 0.02, -FILLET2_R * 0.02), (FILLET2_R, -FILLET2_R * 0.02))
            Line((FILLET2_R, -FILLET2_R * 0.02), (FILLET2_R, 0))
        make_face()
    fillet2_2_piece_7a = extrude(amount=12.8, mode=Mode.PRIVATE)
    fillet2_2_piece_7a = split(fillet2_2_piece_7a, bisect_by=Plane(origin=(-3.9, -7.447209771, 67.547209771), z_dir=(-1, 0, 0)), keep=Keep.TOP, mode=Mode.PRIVATE)
    with BuildSketch(Plane(origin=(-3.9, -12.9, 68), x_dir=(1, 0, 0), z_dir=(0, 1, 0))) as fillet2_2_piece_7b_section:
        with BuildLine():
            CenterArc((FILLET2_R, FILLET2_R), FILLET2_R, 180, 90)
            Line((0, FILLET2_R), (-FILLET2_R * 0.02, FILLET2_R))
            Line((-FILLET2_R * 0.02, FILLET2_R), (-FILLET2_R * 0.02, -FILLET2_R * 0.02))
            Line((-FILLET2_R * 0.02, -FILLET2_R * 0.02), (FILLET2_R, -FILLET2_R * 0.02))
            Line((FILLET2_R, -FILLET2_R * 0.02), (FILLET2_R, 0))
        make_face()
    fillet2_2_piece_7b = extrude(amount=72.9, mode=Mode.PRIVATE)
    fillet2_2_piece_7b = split(fillet2_2_piece_7b, bisect_by=Plane(origin=(-3.447209771, -7.9, 67.547209771), z_dir=(0, -1, 0)), keep=Keep.TOP, mode=Mode.PRIVATE)
    fillet2_2_piece_7 = fillet2_2_piece_7a & fillet2_2_piece_7b
    add(fillet2_2_piece_7, mode=Mode.SUBTRACT)


solid = part.part
